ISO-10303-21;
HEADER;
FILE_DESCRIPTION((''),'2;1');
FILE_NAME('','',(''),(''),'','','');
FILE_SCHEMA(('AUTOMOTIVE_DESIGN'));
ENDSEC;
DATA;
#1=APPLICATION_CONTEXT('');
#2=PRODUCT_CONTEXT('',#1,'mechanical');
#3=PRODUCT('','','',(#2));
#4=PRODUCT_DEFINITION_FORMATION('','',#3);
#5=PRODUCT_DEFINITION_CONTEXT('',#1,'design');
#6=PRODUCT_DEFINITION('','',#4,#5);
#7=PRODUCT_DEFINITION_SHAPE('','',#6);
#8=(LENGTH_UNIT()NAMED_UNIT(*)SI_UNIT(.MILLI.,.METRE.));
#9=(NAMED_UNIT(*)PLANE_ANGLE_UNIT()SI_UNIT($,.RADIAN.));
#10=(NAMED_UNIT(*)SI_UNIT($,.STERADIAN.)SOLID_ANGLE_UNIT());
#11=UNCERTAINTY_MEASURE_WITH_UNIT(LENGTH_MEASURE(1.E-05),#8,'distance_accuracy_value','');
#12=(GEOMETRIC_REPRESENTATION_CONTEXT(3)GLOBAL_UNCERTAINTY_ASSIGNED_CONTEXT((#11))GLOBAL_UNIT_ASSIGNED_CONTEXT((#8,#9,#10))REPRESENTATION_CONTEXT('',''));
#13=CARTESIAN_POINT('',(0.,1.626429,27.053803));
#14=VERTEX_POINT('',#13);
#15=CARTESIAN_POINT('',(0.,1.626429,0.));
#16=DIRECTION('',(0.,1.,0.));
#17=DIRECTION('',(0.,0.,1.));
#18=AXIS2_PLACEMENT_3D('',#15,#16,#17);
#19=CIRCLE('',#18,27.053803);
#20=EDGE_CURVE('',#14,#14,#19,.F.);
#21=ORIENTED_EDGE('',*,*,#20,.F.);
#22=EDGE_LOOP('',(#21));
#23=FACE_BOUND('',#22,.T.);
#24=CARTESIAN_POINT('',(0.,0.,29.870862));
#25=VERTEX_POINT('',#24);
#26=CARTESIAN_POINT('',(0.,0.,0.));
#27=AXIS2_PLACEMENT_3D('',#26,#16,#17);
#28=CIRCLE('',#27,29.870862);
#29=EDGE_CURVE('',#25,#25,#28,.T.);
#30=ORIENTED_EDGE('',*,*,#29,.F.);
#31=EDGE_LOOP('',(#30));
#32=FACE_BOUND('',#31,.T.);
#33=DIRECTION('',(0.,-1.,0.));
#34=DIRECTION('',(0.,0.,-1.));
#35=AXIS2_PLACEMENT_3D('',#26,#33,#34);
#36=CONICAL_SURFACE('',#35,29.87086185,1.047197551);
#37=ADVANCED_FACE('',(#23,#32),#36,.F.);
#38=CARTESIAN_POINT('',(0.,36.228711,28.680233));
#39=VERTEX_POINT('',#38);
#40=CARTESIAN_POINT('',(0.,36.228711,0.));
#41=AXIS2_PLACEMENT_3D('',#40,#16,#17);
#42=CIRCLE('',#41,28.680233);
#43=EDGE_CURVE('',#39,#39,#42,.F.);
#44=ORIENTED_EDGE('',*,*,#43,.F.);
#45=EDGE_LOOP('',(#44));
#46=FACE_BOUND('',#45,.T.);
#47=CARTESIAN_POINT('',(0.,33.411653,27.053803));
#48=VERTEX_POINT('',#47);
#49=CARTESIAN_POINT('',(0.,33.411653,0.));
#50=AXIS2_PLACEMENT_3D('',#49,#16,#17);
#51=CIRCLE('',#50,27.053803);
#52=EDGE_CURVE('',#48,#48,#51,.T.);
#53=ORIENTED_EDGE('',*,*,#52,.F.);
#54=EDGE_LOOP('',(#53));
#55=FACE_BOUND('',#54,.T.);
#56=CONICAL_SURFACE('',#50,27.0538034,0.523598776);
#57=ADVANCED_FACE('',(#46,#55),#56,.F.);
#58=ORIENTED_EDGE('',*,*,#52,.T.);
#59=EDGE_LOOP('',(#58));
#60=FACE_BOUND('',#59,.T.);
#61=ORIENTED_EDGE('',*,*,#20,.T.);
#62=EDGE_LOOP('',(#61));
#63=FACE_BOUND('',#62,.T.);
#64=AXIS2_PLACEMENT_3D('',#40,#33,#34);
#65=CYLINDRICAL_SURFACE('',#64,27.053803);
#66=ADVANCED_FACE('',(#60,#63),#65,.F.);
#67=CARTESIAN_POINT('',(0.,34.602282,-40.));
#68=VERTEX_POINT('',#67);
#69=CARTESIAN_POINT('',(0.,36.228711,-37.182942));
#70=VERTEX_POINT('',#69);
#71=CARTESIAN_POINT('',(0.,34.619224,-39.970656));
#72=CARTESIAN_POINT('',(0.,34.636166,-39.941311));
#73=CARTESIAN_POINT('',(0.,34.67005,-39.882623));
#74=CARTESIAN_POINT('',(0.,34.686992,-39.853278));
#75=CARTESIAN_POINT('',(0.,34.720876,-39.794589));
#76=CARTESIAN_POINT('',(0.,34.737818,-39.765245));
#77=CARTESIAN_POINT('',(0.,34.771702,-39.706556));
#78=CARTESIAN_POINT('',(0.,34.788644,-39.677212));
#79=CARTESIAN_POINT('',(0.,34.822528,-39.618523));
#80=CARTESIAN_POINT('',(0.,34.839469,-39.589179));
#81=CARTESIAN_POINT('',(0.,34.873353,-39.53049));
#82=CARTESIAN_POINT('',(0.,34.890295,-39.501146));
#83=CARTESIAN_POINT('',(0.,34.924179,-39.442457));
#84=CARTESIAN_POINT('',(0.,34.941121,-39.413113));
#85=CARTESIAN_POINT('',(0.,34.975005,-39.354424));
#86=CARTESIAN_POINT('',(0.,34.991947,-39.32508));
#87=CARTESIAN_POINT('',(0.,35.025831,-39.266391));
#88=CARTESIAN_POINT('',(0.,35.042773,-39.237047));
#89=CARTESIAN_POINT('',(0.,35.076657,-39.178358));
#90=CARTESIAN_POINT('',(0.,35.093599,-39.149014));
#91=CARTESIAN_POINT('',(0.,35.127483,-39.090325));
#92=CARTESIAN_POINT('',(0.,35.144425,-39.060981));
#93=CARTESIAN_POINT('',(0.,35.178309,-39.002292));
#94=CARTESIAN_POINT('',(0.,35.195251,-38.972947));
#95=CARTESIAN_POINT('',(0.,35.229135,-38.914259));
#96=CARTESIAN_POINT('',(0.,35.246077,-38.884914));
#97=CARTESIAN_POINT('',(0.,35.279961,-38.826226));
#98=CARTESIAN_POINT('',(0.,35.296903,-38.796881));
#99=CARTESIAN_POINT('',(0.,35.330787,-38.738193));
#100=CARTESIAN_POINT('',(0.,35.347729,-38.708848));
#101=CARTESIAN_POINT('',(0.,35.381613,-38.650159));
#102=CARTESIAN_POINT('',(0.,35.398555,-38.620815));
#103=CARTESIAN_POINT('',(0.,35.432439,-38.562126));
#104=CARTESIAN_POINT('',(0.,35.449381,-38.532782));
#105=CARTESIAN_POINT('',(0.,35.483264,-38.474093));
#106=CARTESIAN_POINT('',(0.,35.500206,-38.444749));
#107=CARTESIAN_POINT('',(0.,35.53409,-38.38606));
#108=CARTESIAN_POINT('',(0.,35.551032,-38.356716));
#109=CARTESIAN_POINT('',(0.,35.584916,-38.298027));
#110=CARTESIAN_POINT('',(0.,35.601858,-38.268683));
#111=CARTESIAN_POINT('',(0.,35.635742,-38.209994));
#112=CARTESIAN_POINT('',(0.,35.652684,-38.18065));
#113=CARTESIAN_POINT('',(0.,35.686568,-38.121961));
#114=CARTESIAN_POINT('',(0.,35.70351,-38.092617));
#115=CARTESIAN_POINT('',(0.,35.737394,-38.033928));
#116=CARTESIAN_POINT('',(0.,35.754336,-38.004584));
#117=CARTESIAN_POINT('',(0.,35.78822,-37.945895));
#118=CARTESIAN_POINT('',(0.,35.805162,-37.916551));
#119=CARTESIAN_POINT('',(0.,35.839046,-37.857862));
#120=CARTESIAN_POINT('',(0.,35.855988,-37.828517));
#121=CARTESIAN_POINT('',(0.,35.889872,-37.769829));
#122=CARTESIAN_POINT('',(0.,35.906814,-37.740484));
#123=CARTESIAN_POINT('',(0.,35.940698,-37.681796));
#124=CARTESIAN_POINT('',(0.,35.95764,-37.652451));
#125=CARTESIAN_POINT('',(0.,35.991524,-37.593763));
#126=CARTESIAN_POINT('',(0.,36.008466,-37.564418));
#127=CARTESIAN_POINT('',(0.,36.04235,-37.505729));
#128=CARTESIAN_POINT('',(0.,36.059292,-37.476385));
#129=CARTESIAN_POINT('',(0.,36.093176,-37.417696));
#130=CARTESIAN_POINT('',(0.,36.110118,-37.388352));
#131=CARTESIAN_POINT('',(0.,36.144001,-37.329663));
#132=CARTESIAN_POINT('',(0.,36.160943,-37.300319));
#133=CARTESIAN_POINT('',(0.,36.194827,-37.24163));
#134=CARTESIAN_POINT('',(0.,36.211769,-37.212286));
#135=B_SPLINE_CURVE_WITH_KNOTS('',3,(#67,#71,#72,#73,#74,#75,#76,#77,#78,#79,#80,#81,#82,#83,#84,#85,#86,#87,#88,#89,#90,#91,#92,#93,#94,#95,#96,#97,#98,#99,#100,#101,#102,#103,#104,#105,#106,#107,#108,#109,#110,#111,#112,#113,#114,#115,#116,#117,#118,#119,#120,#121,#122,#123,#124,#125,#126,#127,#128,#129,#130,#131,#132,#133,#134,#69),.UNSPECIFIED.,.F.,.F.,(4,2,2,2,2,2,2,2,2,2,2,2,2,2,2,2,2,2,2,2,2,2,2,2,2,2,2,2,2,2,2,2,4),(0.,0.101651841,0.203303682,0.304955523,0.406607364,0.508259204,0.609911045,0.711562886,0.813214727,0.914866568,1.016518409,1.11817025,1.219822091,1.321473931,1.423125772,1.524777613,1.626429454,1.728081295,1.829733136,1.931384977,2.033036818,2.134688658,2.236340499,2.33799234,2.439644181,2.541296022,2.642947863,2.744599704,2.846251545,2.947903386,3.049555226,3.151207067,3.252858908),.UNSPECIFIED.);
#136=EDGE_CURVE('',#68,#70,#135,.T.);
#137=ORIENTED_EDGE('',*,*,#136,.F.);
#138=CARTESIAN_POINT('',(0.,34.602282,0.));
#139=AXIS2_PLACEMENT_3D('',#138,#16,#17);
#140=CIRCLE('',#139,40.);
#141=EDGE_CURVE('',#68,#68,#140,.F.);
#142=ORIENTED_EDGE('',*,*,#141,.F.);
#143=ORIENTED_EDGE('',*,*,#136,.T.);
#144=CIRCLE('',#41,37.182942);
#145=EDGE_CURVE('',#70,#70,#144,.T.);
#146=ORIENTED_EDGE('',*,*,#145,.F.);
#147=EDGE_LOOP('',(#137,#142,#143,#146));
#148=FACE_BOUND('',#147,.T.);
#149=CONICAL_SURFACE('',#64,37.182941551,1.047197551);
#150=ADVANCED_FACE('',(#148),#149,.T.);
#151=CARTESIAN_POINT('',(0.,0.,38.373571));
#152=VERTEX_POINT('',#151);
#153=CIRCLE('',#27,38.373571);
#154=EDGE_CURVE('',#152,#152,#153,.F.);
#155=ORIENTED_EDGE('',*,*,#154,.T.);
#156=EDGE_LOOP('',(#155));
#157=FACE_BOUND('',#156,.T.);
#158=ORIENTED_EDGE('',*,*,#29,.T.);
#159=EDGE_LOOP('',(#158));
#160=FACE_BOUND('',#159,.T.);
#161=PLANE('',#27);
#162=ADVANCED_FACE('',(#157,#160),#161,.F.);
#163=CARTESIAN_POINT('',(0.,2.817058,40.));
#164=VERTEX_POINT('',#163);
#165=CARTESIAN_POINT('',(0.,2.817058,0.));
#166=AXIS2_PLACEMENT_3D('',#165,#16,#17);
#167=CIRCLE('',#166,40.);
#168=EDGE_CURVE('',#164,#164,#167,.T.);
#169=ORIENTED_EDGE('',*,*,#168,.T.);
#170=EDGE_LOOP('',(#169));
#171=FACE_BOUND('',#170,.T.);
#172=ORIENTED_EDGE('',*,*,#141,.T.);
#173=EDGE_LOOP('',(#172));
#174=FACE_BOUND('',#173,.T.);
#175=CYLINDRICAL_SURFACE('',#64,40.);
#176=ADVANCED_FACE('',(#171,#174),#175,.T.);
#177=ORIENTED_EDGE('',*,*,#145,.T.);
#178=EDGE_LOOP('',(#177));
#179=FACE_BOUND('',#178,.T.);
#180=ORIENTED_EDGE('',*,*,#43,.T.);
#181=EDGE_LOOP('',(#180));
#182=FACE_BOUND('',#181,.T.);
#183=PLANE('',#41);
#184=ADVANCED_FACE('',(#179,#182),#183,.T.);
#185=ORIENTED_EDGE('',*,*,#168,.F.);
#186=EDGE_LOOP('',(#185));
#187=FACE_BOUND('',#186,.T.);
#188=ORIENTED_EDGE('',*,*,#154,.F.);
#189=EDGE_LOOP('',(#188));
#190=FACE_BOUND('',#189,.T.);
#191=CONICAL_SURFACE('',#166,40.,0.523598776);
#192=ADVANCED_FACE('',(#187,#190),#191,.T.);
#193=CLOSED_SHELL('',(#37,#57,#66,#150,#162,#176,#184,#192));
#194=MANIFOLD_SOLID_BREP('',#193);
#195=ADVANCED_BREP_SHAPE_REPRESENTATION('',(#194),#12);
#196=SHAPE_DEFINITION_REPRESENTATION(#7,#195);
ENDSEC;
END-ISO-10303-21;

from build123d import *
from OCP.BRepFilletAPI import BRepFilletAPI_MakeChamfer

# Parameters (mm, degrees)
SKETCH1_R           = 40
BOSS_EXTRUDE1_DEPTH = 36.228711317
SKETCH2_R           = 27.0538034
CUT_EXTRUDE1_DEPTH  = 68.175289532
CHAMFER1_SIZE       = 1.626429454
CHAMFER1_SIZE2      = 2.817058449


with BuildPart() as part:
    # Sketch1 → Boss-Extrude1 (new body)
    with BuildSketch(Plane(origin=(0, 0, 0), x_dir=(1, 0, 0), z_dir=(0, 1, 0))):
        Circle(SKETCH1_R)
    extrude(amount=BOSS_EXTRUDE1_DEPTH)

    # Sketch2 → Cut-Extrude1 (cut, through all)
    with BuildSketch(Plane(origin=(0, 0, 0), x_dir=(1, 0, 0), z_dir=(0, 1, 0))):
        Circle(SKETCH2_R)
    extrude(amount=CUT_EXTRUDE1_DEPTH, mode=Mode.SUBTRACT)

    # Chamfer1: one chamfer whose edges measure the first distance from different faces: ONE call of the kernel's chamfer builder (chamfer() names one face for all edges)
    chamfer1_edges_1 = [part.edges().sort_by_distance(p)[0] for p in [
        (-27.0538034, 36.228711317, 0),
    ]]
    chamfer1_side_1 = [part.faces().sort_by_distance(p)[0] for p in [
        (-38.86862915, 36.228711317, 0),
    ]]
    chamfer1_edges_2 = [part.edges().sort_by_distance(p)[0] for p in [
        (-27.0538034, 0, 0),
    ]]
    chamfer1_side_2 = [part.faces().sort_by_distance(p)[0] for p in [
        (-27.0538034, 18.114355658, 0),
    ]]
    chamfer1_edges_3 = [part.edges().sort_by_distance(p)[0] for p in [
        (-40, 0, 0),
    ]]
    chamfer1_side_3 = [part.faces().sort_by_distance(p)[0] for p in [
        (-38.86862915, 0, 0),
    ]]
    chamfer1_edges_4 = [part.edges().sort_by_distance(p)[0] for p in [
        (-40, 36.228711317, 0),
    ]]
    chamfer1_side_4 = [part.faces().sort_by_distance(p)[0] for p in [
        (-40, 18.114355658, 0),
    ]]
    chamfer1 = BRepFilletAPI_MakeChamfer(part.part.solid().wrapped)
    for e in chamfer1_edges_1:
        chamfer1.Add(CHAMFER1_SIZE, CHAMFER1_SIZE2, e.wrapped, chamfer1_side_1[0].wrapped)  # the first distance lies on this face
    for e in chamfer1_edges_2:
        chamfer1.Add(CHAMFER1_SIZE, CHAMFER1_SIZE2, e.wrapped, chamfer1_side_2[0].wrapped)  # the first distance lies on this face
    for e in chamfer1_edges_3:
        chamfer1.Add(CHAMFER1_SIZE, CHAMFER1_SIZE2, e.wrapped, chamfer1_side_3[0].wrapped)  # the first distance lies on this face
    for e in chamfer1_edges_4:
        chamfer1.Add(CHAMFER1_SIZE, CHAMFER1_SIZE2, e.wrapped, chamfer1_side_4[0].wrapped)  # the first distance lies on this face
    add(Compound.cast(chamfer1.Shape()), mode=Mode.REPLACE)


solid = part.part
